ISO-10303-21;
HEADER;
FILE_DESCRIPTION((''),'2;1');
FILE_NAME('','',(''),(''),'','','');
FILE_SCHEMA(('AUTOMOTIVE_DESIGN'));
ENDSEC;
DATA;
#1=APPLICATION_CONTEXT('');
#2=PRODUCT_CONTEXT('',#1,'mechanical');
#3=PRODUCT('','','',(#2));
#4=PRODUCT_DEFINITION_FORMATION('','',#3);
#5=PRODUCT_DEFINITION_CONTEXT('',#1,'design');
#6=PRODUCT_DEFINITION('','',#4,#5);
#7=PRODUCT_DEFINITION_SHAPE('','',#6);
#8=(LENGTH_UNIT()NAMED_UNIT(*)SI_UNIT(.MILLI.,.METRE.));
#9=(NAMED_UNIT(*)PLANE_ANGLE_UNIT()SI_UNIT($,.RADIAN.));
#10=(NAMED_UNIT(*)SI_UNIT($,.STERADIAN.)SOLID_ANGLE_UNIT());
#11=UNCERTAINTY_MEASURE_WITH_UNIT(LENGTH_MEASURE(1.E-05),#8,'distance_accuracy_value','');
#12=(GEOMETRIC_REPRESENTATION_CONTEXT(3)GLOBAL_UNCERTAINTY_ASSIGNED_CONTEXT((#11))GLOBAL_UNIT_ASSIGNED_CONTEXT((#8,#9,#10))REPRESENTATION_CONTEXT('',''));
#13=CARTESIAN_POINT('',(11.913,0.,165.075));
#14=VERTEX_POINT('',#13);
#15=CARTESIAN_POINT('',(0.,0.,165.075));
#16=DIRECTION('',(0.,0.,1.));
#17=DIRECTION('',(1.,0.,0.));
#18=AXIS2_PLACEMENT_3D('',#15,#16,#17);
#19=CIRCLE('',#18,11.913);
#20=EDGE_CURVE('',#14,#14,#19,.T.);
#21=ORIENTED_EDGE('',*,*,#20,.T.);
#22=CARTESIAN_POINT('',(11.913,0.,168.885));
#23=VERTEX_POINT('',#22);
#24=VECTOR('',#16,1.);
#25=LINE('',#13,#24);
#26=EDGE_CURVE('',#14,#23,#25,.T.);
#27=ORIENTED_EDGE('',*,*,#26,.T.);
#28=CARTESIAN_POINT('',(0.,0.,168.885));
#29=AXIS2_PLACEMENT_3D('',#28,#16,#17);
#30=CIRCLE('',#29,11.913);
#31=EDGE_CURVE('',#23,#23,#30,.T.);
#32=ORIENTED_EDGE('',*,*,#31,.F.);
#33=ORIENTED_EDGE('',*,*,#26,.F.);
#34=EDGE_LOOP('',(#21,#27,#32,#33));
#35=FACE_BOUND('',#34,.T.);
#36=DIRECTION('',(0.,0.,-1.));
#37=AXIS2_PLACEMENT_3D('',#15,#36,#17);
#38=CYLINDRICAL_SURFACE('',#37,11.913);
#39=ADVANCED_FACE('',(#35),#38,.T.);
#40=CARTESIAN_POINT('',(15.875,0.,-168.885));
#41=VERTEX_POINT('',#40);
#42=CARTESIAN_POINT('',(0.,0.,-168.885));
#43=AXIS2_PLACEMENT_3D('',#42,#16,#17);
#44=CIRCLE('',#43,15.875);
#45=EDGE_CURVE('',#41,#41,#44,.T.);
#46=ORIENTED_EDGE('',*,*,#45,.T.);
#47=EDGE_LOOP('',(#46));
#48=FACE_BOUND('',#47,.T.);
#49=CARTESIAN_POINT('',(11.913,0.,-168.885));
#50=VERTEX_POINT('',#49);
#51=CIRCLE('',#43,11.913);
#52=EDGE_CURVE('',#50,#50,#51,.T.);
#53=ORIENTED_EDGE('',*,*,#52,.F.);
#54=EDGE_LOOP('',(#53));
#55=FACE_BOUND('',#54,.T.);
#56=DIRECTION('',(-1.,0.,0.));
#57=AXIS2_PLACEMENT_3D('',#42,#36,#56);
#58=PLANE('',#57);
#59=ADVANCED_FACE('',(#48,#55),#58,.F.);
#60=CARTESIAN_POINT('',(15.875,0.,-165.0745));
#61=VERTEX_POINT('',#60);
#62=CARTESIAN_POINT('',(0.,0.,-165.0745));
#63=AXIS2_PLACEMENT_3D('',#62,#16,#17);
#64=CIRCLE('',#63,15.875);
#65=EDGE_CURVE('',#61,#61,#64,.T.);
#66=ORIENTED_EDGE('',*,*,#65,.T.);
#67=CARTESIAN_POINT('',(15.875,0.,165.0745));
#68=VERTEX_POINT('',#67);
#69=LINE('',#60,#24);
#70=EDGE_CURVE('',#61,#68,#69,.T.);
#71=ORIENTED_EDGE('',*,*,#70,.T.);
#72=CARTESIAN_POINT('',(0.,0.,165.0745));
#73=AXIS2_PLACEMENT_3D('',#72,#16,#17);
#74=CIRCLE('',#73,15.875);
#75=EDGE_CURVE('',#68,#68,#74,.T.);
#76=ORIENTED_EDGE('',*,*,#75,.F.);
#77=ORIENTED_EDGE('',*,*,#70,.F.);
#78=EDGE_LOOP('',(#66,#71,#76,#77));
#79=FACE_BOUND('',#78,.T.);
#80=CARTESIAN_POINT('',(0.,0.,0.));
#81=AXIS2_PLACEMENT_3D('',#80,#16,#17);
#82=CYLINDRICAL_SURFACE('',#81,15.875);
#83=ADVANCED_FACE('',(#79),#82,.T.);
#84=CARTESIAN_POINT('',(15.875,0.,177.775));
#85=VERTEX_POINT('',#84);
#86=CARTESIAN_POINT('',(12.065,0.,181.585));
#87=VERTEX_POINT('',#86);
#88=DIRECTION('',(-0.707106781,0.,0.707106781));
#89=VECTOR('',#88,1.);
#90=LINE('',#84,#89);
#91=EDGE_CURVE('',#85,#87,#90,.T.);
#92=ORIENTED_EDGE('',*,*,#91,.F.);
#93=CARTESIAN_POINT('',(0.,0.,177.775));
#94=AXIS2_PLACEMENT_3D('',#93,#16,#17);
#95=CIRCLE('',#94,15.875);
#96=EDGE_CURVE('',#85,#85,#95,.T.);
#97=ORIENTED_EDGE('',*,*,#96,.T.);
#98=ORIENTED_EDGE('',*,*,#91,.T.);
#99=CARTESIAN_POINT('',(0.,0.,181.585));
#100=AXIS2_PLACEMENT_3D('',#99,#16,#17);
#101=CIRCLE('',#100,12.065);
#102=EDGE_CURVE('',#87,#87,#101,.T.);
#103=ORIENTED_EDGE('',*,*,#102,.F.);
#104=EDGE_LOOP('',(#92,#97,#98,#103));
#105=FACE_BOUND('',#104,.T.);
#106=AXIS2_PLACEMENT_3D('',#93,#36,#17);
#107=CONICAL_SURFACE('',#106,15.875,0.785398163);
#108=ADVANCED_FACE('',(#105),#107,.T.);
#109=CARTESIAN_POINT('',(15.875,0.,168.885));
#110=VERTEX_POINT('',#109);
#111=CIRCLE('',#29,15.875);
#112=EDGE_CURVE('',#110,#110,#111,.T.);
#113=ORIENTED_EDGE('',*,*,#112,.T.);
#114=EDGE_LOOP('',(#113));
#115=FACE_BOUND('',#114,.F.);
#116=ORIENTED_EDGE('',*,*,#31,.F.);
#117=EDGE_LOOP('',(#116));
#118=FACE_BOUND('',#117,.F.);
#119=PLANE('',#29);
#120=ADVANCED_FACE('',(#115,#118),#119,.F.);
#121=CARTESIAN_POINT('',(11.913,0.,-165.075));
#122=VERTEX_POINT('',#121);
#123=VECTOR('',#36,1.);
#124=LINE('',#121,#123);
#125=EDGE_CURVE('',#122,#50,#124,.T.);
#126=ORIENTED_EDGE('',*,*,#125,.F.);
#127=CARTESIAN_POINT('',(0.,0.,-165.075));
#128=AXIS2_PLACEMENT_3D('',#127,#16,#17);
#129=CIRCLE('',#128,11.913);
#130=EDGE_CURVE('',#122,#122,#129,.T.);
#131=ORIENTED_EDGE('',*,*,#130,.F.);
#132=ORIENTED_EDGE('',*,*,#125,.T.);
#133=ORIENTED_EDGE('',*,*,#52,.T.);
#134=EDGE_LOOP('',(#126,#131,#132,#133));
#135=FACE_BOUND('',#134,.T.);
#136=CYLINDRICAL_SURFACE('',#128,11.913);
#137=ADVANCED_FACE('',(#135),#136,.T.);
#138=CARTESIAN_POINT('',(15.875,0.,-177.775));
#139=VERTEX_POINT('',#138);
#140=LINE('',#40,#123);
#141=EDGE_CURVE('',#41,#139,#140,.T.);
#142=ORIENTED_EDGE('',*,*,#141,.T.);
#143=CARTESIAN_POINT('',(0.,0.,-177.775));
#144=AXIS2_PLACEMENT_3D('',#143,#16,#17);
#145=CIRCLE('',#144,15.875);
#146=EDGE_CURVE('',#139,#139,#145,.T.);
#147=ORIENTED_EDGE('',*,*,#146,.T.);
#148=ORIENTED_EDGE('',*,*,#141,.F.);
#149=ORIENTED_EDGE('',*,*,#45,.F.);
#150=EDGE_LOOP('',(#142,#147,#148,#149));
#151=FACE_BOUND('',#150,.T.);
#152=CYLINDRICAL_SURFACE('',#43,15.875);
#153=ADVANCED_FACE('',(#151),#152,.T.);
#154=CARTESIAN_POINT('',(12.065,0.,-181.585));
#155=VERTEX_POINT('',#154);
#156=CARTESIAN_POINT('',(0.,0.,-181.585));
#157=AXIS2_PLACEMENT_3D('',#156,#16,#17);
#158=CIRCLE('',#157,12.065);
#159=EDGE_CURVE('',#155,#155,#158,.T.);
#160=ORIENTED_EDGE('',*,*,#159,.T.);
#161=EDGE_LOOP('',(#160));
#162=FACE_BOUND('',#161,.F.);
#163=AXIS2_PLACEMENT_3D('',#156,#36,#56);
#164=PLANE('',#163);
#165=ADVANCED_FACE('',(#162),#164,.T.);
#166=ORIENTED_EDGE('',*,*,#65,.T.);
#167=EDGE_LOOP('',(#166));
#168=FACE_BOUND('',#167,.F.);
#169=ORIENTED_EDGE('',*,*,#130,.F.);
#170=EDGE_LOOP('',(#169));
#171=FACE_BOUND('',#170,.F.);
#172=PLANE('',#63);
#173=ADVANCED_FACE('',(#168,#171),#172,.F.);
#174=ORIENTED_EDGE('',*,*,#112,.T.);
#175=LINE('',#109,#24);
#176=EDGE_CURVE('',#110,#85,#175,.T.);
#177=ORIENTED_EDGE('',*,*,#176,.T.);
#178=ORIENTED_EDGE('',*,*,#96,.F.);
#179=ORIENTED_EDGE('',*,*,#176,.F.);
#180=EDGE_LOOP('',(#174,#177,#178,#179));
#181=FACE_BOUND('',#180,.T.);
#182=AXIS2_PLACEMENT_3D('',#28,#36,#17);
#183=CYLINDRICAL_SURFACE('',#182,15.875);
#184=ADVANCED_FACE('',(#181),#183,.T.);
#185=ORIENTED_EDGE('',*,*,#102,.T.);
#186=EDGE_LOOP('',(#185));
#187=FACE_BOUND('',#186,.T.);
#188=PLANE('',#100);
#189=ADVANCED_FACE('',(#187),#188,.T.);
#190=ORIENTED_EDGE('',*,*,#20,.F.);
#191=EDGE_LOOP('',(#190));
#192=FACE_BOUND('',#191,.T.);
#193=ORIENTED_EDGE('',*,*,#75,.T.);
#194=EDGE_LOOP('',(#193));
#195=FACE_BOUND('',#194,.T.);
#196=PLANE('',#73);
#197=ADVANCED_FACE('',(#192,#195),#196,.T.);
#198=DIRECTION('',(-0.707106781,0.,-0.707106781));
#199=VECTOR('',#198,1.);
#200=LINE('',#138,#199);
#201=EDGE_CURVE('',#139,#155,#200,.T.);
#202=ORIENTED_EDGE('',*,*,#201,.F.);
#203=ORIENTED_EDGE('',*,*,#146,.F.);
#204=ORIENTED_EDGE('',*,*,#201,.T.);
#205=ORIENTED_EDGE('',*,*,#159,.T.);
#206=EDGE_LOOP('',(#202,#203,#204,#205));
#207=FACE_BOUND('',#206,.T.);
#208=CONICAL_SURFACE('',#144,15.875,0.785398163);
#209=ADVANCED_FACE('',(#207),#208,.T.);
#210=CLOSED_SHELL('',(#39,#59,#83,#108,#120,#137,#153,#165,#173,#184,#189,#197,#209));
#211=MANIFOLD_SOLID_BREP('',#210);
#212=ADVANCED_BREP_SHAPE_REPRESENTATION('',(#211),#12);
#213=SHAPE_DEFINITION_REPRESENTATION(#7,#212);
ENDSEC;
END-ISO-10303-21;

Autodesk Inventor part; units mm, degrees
ref_plane "YZ Plane" through (0, 0, 0) normal (1, 0, 0) x (0, 1, 0)
ref_plane "XZ Plane" through (0, 0, 0) normal (0, 1, 0) x (-1, 0, 0)
ref_plane "XY Plane" through (0, 0, 0) normal (0, 0, 1) x (1, 0, 0)
sketch "Sketch1" plane through (0, 0, 0) normal (0, 0, 1) x (1, 0, 0)
  circle A0 centre (0, 0) radius 1.5875
  dimension "d0" = 3.175
extrude "Extrusion1" add sketch "Sketch1" along normal mid plane 33.0149
sketch "Sketch2" plane through (0, 0, 16.5075) normal (0, 0, 1) x (1, 0, 0)
  circle A0 centre (0, 0) radius 1.1913
  dimension "d3" = 2.3825
extrude "Extrusion2" add sketch "Sketch2" along normal blind 0.381
sketch "Sketch3" plane through (0, 0, 16.8885) normal (0, 0, 1) x (1, 0, 0)
  circle A0 centre (0, 0) radius 1.5875
  dimension "d6" = 3.175
extrude "Extrusion3" add sketch "Sketch3" along normal blind 1.27
chamfer "Chamfer1" distance 0.381 angle 45 1 edges at (-1.5875, 0, 18.1585)
mirror "Mirror1" about plane through (0, 0, 0) normal (0, 0, 1) of "Extrusion3", "Extrusion2", "Chamfer1"
scale "Scale1" factors (10, 10, 10) then translate (0, 0, 0) bodies 1
properties part number "Front Upper Hinge Pin"
